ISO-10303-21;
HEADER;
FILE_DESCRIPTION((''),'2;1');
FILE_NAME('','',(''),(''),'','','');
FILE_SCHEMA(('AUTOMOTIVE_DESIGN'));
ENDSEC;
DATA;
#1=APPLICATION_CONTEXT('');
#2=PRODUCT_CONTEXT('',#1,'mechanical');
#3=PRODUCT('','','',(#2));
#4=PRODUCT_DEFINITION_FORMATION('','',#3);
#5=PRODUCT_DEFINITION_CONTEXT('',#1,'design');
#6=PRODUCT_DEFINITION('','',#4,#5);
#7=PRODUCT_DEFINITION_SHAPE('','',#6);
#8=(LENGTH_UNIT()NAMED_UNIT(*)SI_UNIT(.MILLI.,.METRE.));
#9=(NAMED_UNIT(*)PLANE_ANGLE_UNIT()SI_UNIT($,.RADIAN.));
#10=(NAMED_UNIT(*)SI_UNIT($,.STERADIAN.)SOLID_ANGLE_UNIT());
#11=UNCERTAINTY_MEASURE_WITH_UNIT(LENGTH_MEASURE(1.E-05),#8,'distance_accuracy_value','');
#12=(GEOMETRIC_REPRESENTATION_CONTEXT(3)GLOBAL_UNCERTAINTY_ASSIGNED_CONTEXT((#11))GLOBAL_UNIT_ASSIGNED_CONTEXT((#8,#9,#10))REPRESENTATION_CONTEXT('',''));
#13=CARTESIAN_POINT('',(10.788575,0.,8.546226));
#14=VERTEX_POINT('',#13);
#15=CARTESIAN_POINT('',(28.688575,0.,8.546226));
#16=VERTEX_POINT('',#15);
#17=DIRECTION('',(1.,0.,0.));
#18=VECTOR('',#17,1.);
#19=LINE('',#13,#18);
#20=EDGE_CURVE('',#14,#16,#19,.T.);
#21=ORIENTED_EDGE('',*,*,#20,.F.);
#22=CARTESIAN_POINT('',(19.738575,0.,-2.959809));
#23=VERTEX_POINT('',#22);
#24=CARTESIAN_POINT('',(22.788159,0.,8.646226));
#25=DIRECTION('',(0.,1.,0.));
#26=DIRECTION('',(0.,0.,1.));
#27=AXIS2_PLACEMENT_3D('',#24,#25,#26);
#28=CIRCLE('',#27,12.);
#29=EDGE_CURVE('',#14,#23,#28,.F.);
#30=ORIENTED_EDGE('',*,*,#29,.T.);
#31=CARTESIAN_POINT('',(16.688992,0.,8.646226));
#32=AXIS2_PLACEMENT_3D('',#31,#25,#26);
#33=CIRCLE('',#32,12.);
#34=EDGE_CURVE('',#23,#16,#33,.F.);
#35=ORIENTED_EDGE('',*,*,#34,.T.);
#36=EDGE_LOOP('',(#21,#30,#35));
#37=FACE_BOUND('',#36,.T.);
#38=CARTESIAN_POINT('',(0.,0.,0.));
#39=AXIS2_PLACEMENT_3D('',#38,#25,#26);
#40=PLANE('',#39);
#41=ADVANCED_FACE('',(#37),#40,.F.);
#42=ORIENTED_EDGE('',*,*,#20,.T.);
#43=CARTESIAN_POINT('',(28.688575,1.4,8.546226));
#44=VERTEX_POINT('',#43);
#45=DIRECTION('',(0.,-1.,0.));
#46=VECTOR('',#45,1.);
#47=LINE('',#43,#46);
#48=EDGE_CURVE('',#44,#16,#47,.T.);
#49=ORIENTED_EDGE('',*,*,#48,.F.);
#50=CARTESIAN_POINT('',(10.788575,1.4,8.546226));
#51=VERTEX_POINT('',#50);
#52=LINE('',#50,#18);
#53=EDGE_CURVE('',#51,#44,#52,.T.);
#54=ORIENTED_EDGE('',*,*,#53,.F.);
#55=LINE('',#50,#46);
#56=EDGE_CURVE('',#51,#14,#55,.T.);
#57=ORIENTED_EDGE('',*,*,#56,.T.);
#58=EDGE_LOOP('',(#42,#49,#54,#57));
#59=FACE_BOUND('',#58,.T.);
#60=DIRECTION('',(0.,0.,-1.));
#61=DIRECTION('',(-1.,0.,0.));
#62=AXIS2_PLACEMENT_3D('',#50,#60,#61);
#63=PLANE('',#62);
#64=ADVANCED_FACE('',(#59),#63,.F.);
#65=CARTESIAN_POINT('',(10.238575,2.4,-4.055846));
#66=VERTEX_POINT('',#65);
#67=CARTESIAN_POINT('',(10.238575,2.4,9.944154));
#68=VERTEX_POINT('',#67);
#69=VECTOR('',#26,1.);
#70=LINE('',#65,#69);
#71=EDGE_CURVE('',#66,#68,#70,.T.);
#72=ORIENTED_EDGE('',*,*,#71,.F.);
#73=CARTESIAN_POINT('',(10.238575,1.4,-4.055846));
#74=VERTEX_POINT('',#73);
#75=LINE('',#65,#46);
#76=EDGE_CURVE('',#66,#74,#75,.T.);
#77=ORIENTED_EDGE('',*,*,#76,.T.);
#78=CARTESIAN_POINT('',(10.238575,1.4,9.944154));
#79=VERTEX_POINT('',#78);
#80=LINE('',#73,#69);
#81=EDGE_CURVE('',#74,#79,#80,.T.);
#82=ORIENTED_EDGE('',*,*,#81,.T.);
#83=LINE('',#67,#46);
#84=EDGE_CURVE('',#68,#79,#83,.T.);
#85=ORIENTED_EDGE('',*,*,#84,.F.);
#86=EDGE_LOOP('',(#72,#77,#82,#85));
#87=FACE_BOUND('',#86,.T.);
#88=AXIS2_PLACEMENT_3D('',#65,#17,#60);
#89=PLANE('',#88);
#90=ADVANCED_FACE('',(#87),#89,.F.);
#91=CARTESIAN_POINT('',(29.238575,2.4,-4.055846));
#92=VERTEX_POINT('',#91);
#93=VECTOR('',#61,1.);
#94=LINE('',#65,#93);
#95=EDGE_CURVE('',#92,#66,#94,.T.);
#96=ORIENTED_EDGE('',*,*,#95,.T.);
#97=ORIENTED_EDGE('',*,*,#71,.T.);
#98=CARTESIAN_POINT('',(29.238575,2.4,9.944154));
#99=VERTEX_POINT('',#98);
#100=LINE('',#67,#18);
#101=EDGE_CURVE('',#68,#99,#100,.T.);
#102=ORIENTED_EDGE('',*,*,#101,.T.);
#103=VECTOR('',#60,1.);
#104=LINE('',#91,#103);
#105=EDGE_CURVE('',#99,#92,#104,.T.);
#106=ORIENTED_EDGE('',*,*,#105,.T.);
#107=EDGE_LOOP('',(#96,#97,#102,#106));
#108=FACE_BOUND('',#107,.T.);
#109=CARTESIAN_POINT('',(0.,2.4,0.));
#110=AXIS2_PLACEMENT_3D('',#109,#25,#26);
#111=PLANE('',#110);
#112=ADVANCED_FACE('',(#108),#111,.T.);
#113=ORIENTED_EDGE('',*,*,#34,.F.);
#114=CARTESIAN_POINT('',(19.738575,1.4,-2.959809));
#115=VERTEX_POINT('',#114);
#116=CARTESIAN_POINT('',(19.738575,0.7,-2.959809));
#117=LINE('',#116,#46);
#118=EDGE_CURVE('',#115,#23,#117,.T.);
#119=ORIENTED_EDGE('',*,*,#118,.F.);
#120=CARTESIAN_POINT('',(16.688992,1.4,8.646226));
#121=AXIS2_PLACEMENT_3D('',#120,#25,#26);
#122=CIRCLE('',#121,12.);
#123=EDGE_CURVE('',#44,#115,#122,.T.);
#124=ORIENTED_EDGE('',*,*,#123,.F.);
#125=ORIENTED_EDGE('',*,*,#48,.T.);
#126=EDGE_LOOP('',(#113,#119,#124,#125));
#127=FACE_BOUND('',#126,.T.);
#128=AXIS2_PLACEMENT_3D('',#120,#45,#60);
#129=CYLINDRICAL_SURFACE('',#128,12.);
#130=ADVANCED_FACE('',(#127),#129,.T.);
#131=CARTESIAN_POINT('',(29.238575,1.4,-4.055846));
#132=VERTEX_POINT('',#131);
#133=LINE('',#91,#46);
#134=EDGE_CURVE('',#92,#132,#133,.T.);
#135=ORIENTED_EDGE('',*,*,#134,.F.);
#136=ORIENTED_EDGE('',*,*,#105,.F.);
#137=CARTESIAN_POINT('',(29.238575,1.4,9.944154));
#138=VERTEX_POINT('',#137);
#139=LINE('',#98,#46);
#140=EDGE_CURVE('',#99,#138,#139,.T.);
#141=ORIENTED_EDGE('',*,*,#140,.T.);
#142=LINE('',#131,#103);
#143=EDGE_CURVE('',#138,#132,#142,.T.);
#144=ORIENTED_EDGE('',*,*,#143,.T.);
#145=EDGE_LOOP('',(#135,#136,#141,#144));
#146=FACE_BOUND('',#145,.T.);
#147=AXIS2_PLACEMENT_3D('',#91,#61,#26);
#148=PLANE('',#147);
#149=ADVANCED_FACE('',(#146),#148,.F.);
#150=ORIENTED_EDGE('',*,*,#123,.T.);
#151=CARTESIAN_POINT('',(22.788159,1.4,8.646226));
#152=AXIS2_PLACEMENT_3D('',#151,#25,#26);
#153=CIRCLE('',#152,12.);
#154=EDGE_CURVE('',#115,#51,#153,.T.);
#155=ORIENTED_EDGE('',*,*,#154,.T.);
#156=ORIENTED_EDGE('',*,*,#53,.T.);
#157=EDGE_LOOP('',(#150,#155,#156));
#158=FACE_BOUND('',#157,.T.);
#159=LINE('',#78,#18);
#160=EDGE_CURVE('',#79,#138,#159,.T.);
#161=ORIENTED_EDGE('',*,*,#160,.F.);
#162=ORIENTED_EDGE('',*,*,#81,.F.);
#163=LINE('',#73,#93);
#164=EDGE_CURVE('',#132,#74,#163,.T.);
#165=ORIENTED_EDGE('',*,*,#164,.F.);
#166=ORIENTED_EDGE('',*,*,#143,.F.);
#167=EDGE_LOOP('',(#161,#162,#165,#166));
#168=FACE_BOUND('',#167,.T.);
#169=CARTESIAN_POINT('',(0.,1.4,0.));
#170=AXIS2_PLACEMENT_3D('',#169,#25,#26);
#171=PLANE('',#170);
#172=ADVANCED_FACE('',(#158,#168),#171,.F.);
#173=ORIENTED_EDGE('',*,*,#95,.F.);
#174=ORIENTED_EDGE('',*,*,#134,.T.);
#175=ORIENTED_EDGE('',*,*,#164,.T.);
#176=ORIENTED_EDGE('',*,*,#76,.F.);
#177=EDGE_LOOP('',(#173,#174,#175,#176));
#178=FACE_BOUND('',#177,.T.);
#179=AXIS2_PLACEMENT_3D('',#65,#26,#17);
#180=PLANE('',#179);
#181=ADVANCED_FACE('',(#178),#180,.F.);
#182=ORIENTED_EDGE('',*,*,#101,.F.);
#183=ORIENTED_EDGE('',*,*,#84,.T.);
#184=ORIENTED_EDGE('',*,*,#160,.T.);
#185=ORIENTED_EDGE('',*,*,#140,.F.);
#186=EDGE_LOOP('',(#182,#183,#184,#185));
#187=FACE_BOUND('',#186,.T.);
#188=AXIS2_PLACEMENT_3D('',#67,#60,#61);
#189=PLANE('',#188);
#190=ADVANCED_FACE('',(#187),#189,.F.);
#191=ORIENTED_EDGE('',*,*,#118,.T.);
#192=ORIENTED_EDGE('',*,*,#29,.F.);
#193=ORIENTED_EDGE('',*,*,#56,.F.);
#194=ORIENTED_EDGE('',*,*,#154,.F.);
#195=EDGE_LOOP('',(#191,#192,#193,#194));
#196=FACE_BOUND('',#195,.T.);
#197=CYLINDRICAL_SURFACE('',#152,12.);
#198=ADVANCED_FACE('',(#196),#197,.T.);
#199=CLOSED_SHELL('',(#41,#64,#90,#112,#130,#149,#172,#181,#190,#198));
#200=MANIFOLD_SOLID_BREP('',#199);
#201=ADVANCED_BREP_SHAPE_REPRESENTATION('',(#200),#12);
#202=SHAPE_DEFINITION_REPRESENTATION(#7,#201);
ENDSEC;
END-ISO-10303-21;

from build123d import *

# Parameters (mm, degrees)
SKETCH3_W           = 17.9
SKETCH3_H           = 11.9
BOSS_EXTRUDE3_DEPTH = 1.4
FILLET2_R           = 12
SKETCH4_W           = 19
SKETCH4_H           = 14
BOSS_EXTRUDE4_DEPTH = 1


with BuildPart() as part:
    # Sketch3 → Boss-Extrude3 (new body)
    with BuildSketch(Plane(origin=(0, 0, 0), x_dir=(1, 0, 0), z_dir=(0, 1, 0))):
        with Locations((19.738575208, -2.596225655)):
            Rectangle(SKETCH3_W, SKETCH3_H)
    extrude(amount=BOSS_EXTRUDE3_DEPTH)

    # Fillet2
    # the kernel refuses this fillet: 12 mm, written as the material it takes off along each edge
    with BuildSketch(Plane(origin=(10.788575208, -30, -3.353774345), x_dir=(1, 0, 0), z_dir=(0, 1, 0))) as fillet2_piece_1:
        with BuildLine():
            CenterArc((FILLET2_R, -FILLET2_R), FILLET2_R, 90, 90)
            Line((0, -FILLET2_R), (0, 0))
            Line((0, 0), (FILLET2_R, 0))
        make_face()
    extrude(amount=61.4, mode=Mode.SUBTRACT)
    with BuildSketch(Plane(origin=(28.688575208, -30, -3.353774345), x_dir=(-1, 0, 0), z_dir=(0, 1, 0))) as fillet2_piece_2:
        with BuildLine():
            CenterArc((FILLET2_R, FILLET2_R), FILLET2_R, 180, 90)
            Line((0, FILLET2_R), (0, 0))
            Line((0, 0), (FILLET2_R, 0))
        make_face()
    extrude(amount=61.4, mode=Mode.SUBTRACT)

    # Sketch4 → Boss-Extrude4 (add)
    with BuildSketch(Plane(origin=(0, 1.4, 0), x_dir=(1, 0, 0), z_dir=(0, 1, 0))):
        with Locations((19.738575208, -2.944154074)):
            Rectangle(SKETCH4_W, SKETCH4_H)
    extrude(amount=BOSS_EXTRUDE4_DEPTH)


solid = part.part
